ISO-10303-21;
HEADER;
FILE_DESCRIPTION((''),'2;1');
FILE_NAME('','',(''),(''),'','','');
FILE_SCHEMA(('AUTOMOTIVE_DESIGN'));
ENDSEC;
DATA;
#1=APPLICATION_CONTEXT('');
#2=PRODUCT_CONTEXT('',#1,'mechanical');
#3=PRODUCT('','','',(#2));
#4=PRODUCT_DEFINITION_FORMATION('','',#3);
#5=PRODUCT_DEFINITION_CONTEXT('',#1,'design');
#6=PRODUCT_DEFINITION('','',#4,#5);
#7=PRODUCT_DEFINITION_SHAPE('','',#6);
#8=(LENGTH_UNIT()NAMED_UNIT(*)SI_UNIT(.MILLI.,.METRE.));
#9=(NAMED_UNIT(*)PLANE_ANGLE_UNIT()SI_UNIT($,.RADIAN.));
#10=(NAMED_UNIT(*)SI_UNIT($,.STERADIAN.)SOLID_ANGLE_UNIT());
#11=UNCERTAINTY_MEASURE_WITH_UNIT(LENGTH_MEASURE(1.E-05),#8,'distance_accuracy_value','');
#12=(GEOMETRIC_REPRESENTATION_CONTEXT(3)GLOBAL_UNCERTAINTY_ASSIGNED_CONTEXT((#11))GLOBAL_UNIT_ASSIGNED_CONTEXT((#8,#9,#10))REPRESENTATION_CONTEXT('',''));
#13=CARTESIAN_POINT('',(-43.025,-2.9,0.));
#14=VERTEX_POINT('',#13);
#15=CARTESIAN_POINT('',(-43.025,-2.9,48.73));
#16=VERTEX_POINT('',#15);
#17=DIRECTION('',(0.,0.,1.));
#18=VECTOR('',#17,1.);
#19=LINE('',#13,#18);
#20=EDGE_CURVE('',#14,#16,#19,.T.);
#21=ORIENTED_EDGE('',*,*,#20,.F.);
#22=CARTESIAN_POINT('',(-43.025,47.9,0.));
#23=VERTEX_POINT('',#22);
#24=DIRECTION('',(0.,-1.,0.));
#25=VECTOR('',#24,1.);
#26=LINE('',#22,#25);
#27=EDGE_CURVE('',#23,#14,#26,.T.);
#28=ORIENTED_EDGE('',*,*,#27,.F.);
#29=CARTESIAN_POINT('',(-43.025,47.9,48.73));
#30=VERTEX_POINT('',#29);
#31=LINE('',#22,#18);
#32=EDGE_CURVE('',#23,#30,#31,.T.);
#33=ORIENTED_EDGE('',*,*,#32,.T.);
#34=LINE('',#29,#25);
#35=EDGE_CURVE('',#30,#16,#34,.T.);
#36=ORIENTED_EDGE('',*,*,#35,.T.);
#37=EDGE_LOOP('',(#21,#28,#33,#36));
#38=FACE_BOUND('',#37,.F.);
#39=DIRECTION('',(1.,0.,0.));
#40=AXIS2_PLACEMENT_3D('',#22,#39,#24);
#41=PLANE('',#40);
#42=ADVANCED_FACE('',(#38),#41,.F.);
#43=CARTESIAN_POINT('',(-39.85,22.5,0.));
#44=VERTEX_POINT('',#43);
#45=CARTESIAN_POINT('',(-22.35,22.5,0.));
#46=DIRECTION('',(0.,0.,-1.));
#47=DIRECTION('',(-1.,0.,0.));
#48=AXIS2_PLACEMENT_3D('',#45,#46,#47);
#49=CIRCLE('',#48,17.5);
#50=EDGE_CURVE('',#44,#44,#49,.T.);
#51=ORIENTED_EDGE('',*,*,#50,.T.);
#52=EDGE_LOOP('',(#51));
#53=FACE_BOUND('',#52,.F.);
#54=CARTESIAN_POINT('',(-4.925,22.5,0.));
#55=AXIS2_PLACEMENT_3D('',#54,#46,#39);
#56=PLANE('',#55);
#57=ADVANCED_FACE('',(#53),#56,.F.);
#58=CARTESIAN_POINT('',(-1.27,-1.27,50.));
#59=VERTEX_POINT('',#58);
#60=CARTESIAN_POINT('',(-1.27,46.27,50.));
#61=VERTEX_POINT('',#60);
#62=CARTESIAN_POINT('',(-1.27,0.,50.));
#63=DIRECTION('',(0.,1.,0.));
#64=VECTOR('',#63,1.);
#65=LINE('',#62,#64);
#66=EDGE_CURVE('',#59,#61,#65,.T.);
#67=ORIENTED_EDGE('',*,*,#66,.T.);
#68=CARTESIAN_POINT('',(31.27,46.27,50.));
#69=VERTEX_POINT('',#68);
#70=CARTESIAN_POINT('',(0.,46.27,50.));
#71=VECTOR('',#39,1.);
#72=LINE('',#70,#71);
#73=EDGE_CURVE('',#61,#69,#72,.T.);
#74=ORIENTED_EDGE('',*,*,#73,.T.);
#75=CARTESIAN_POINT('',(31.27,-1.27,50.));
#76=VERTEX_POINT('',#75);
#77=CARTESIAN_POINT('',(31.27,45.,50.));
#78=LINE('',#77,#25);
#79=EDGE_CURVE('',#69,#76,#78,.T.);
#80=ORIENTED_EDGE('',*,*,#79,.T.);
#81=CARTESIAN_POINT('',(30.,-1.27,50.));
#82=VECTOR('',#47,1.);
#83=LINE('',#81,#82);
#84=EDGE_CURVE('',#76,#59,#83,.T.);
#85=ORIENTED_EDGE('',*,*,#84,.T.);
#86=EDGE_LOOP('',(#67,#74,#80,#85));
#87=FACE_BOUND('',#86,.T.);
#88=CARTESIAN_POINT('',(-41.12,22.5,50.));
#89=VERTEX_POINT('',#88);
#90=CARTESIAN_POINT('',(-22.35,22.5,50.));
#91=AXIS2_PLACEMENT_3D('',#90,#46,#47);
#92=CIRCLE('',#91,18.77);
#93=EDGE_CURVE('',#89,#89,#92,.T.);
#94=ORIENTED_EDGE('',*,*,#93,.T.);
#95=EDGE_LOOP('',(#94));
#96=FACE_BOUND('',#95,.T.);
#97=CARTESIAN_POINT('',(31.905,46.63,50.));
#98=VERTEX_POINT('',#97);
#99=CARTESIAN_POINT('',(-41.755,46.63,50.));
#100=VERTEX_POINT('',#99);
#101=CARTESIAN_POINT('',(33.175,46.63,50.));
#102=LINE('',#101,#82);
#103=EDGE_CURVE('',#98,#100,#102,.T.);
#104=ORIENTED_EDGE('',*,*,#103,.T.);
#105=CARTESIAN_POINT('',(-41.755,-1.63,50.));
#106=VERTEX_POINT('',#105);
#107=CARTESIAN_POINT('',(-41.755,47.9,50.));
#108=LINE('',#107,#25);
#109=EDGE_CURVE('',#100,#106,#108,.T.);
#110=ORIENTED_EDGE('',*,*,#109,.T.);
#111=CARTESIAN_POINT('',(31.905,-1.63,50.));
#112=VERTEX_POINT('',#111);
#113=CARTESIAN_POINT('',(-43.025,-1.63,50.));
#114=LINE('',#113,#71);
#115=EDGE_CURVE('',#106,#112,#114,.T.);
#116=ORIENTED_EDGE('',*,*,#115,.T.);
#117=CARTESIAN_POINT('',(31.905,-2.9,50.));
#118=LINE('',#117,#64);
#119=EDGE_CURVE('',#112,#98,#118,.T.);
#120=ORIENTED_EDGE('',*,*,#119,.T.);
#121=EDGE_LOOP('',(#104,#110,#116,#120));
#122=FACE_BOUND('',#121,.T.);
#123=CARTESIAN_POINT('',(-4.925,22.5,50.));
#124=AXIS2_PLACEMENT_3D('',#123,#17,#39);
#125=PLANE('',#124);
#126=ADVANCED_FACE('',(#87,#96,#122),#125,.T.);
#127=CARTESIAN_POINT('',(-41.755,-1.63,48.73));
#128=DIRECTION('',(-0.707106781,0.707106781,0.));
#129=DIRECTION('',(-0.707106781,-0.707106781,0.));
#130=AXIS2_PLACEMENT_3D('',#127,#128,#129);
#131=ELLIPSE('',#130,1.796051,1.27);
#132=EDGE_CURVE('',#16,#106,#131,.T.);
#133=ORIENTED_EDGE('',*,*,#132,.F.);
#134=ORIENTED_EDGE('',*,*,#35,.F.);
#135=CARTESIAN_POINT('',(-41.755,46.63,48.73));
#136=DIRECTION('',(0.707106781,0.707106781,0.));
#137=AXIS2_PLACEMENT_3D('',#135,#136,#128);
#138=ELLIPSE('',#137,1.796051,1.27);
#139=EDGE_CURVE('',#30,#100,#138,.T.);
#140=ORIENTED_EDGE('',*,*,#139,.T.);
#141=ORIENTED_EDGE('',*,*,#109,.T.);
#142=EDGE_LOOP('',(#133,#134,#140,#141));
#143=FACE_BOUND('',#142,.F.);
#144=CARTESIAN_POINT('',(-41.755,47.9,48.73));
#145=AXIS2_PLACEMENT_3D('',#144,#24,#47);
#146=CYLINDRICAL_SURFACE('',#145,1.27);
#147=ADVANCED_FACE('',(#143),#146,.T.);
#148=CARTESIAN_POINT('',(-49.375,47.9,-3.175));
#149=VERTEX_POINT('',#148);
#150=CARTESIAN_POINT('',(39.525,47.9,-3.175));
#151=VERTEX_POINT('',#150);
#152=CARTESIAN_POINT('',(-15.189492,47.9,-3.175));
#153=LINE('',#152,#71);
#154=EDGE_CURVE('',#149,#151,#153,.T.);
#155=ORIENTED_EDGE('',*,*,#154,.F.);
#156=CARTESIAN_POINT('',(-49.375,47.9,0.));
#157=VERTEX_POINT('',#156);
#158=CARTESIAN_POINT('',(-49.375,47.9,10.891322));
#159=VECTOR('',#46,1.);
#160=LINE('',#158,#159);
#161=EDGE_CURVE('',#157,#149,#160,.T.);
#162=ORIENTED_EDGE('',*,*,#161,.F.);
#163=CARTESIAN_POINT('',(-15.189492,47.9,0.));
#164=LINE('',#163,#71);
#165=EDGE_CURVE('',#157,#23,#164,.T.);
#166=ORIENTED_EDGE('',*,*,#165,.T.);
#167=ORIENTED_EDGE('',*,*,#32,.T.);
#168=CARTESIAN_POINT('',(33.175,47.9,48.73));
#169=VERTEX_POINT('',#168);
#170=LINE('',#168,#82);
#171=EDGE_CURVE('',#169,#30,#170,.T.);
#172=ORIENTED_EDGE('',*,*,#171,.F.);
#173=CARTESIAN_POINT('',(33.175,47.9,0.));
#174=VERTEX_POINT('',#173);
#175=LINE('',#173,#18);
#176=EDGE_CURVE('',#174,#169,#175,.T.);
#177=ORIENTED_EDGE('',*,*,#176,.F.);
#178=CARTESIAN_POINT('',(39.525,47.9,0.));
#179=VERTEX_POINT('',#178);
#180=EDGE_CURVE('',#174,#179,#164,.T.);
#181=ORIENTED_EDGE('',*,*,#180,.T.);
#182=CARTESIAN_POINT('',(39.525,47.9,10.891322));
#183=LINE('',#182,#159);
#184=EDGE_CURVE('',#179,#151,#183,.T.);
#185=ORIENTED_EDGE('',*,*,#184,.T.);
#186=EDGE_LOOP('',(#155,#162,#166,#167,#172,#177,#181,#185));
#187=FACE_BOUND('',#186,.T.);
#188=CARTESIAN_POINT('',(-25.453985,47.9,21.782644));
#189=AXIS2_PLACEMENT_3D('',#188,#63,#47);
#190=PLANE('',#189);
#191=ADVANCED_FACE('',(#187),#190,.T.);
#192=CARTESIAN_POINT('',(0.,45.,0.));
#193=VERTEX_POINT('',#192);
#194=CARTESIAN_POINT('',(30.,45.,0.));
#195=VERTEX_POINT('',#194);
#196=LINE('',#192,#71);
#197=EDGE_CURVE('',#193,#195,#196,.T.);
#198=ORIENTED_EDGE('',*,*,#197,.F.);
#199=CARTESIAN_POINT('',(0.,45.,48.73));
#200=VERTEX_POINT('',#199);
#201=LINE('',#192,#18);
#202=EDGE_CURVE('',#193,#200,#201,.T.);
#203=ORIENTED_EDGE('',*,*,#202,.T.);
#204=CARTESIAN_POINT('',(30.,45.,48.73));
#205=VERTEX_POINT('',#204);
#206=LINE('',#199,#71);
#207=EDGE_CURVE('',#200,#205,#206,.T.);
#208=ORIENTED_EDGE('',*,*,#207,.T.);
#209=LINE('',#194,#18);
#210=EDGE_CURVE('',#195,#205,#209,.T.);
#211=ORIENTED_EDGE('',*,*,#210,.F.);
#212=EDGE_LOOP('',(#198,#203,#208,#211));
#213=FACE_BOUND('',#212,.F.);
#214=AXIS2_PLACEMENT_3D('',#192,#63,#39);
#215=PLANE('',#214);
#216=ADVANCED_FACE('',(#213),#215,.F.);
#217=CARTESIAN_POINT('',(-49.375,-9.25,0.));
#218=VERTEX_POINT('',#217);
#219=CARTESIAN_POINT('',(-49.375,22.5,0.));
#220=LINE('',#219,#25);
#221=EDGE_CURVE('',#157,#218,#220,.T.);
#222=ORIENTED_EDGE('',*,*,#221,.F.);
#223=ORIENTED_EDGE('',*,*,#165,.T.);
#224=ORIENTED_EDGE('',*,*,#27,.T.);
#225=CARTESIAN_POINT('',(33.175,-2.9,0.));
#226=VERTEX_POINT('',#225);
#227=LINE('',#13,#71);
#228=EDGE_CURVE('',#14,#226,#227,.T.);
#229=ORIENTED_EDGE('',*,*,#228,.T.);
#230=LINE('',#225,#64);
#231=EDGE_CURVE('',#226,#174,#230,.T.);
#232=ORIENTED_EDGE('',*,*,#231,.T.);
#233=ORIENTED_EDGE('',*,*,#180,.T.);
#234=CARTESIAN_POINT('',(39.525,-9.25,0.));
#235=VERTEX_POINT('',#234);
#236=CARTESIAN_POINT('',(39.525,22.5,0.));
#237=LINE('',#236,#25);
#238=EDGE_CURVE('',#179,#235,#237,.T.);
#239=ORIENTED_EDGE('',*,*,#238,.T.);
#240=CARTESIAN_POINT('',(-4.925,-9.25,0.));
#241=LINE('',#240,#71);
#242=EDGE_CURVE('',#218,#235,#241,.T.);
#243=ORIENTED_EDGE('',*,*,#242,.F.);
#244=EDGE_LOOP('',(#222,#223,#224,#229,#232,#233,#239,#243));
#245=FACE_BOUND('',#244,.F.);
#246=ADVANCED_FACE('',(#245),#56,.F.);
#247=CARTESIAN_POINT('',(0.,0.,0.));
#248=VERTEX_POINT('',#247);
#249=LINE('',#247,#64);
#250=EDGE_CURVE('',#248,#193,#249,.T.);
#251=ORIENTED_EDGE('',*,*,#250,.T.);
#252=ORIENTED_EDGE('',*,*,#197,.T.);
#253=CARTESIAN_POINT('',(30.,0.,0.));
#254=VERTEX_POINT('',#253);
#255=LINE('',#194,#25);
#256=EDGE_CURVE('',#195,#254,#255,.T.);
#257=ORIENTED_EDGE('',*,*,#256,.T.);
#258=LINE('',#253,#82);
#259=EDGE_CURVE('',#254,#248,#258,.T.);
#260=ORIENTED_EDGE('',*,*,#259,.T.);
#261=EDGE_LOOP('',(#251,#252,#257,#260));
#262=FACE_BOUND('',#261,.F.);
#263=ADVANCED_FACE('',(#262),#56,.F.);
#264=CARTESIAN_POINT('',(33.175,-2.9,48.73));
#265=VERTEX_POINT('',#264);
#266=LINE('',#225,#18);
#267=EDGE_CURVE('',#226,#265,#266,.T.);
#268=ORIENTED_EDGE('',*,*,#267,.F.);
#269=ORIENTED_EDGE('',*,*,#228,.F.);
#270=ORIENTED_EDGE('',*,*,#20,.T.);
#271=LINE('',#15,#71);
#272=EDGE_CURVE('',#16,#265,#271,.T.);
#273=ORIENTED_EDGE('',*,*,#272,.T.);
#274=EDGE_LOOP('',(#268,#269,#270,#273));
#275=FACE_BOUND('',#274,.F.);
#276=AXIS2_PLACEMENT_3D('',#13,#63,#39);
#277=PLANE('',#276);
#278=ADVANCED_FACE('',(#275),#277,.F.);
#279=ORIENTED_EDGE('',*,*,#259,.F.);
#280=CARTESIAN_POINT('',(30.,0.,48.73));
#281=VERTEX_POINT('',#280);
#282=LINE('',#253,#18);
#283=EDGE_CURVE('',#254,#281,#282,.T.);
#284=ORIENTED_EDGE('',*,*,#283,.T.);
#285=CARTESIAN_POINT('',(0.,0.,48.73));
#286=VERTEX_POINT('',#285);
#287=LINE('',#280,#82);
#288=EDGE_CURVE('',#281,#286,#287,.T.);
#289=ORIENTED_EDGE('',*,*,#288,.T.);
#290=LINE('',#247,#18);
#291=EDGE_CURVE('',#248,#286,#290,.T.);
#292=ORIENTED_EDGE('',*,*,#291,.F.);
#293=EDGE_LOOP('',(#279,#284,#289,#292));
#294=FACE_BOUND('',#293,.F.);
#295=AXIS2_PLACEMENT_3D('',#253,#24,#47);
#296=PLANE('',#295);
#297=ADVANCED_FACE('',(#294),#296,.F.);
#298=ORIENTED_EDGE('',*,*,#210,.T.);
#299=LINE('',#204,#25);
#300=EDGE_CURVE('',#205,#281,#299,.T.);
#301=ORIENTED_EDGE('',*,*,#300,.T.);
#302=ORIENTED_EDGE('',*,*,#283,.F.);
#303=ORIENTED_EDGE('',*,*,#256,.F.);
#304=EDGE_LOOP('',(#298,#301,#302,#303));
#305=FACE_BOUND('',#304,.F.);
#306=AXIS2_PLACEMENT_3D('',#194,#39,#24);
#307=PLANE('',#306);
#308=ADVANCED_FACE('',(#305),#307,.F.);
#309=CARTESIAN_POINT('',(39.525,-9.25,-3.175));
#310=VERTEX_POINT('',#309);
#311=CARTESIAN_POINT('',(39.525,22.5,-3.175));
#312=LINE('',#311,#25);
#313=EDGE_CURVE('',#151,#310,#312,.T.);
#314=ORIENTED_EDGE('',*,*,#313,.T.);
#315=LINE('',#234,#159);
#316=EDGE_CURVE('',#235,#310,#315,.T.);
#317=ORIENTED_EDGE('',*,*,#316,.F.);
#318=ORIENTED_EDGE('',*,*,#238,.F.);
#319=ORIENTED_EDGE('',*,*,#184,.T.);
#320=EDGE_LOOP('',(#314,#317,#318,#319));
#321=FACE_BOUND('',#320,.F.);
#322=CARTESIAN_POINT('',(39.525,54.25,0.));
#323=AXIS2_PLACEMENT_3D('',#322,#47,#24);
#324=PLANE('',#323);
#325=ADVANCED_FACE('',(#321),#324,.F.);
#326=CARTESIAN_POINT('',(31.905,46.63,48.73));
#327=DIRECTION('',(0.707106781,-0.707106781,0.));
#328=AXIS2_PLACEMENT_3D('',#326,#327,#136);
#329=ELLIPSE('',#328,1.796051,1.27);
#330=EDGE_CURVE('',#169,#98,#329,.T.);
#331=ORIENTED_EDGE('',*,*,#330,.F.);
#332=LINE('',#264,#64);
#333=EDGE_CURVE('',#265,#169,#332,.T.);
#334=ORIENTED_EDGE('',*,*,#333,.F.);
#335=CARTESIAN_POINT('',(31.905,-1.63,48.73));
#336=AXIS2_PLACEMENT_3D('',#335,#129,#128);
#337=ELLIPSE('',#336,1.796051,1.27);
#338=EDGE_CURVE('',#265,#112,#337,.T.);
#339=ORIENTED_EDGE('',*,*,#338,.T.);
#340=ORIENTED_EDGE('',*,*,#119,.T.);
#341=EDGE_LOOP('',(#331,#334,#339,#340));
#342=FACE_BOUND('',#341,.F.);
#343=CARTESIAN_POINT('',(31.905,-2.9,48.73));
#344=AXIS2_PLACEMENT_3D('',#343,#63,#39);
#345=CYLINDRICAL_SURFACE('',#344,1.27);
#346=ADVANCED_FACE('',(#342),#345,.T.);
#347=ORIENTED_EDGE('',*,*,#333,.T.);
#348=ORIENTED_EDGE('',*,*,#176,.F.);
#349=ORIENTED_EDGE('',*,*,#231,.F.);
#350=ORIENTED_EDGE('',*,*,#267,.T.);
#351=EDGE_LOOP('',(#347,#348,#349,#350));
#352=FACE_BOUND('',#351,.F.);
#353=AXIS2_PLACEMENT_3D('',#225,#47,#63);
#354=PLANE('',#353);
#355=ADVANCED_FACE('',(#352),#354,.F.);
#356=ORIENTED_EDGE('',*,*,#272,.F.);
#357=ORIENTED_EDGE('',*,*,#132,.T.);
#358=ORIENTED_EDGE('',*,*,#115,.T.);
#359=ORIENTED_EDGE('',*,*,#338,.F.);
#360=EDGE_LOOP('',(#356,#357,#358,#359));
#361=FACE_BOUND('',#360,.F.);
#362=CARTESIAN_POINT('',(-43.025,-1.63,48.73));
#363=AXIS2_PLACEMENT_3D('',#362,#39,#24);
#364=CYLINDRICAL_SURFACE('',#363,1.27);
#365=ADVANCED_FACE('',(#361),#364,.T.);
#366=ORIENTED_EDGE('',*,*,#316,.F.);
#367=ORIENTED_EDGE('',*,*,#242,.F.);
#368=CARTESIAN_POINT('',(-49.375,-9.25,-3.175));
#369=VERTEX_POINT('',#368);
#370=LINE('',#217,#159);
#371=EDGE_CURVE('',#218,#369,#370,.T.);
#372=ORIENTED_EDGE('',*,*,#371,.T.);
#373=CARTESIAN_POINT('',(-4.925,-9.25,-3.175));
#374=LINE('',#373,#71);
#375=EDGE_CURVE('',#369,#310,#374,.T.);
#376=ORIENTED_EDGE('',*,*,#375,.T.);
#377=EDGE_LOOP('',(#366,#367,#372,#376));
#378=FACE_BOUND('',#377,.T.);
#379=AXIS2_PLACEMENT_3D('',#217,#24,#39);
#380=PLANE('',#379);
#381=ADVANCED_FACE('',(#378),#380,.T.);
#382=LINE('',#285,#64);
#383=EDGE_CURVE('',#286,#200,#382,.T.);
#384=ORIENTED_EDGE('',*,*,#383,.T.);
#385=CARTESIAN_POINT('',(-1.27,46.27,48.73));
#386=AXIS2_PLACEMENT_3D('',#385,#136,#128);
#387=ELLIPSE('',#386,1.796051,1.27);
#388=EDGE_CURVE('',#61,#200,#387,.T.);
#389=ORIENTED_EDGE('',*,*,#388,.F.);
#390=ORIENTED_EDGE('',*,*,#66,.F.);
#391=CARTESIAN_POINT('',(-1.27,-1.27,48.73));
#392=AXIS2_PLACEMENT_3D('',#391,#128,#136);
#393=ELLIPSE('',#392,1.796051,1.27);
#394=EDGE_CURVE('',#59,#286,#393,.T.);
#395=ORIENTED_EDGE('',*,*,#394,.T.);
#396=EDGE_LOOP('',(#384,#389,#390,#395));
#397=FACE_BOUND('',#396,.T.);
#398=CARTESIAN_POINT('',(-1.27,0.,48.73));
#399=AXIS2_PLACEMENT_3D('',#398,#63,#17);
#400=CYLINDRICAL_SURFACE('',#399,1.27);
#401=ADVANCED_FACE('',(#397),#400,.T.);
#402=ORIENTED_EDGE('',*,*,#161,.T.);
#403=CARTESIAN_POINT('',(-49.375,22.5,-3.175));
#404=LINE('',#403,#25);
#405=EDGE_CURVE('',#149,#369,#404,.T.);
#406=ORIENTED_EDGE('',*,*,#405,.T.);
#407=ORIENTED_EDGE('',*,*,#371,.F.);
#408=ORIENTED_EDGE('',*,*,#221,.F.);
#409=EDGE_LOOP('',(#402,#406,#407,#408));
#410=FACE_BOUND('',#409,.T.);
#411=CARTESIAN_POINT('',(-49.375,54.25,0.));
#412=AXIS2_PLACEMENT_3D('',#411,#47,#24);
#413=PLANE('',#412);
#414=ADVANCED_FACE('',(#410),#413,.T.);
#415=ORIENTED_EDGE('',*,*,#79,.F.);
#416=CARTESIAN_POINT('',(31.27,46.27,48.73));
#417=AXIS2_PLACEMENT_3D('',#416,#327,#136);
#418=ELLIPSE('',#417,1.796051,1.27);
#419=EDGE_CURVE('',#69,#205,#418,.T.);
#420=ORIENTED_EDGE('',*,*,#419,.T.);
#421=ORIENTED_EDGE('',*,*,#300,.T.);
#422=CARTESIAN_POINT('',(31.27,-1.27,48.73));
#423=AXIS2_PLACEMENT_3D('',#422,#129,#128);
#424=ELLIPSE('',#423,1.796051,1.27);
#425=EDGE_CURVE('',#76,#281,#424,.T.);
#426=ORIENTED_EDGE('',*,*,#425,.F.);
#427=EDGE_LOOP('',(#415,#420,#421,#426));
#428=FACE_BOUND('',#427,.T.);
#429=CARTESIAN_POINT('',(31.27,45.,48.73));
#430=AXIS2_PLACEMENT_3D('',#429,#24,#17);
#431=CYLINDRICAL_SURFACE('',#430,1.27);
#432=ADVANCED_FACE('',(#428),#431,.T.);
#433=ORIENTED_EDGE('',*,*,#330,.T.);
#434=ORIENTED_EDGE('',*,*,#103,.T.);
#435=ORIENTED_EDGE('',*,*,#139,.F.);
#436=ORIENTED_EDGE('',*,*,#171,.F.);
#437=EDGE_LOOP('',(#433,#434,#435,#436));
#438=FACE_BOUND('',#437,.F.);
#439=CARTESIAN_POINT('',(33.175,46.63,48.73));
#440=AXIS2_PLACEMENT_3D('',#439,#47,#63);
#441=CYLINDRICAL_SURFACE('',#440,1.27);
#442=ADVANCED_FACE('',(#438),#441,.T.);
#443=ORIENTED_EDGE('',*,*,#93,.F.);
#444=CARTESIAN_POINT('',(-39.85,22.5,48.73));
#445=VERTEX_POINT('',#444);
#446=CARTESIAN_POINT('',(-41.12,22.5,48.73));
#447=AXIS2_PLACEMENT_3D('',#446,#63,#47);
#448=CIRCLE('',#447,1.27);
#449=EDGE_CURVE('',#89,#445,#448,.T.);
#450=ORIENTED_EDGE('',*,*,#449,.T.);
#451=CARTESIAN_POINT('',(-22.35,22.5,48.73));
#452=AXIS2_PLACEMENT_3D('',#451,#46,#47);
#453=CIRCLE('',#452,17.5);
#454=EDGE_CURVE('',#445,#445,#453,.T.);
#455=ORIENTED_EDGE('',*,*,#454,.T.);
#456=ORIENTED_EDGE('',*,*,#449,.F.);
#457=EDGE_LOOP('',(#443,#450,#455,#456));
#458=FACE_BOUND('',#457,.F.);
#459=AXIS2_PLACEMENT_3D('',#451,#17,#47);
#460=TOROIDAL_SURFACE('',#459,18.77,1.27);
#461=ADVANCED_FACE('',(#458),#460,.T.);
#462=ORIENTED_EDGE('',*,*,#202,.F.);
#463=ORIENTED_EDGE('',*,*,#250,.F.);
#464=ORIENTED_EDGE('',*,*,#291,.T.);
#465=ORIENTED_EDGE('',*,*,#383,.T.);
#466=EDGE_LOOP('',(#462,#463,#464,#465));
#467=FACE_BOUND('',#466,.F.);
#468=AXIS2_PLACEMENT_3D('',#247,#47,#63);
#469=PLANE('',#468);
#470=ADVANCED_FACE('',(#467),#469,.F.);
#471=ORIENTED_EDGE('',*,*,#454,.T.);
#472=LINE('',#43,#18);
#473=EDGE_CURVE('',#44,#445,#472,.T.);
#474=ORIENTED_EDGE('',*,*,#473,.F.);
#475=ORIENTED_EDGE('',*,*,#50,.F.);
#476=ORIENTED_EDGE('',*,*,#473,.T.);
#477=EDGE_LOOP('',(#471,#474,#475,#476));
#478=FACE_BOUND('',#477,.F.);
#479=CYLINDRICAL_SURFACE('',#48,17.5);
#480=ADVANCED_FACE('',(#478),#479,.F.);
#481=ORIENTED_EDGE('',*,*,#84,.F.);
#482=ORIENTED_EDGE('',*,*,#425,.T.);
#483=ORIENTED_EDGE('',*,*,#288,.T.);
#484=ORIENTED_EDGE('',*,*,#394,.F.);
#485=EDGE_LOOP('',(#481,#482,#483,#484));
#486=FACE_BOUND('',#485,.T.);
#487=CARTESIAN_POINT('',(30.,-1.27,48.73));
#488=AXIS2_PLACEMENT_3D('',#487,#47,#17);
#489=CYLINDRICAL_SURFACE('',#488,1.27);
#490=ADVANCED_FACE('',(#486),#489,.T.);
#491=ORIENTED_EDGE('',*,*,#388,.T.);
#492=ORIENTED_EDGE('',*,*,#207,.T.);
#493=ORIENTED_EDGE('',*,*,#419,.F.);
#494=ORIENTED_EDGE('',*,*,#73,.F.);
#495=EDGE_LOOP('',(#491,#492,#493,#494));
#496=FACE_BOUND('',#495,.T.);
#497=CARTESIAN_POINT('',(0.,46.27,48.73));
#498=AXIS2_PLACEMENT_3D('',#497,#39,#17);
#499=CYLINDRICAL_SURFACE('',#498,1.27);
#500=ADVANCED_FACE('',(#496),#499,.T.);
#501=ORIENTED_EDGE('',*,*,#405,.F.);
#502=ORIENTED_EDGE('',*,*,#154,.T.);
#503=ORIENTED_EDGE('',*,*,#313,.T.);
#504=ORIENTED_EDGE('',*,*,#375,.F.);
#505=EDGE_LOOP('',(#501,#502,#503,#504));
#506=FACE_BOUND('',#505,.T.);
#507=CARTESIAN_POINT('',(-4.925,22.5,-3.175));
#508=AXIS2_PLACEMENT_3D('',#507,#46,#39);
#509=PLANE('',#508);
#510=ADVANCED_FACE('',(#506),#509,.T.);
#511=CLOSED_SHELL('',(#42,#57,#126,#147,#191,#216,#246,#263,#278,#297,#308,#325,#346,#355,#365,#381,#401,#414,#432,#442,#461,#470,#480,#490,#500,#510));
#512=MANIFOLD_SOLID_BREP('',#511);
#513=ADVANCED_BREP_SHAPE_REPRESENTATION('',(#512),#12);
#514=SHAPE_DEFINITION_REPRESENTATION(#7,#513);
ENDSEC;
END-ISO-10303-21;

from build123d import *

# Parameters (mm, degrees)
F1_DEPTH = 50
F2_W     = 88.9
F2_H     = 63.5
F2_W_2   = 76.2
F2_H_2   = 50.8
F2_R     = 17.5
F2_W_3   = 30
F2_H_3   = 45
F3_DEPTH = 3.175
F4_W     = 442.8342580795
F4_H     = 256.8548172712
F5_DEPTH = 25.4
F6_R     = 1.27


with BuildPart() as f1:
    # F0 (on Top) → F1 (new body)
    with BuildSketch(Plane.XY):
        Polygon((33.175, -2.9), (33.175, 22.5), (33.175, 47.9), (-43.025, 47.9), (-43.025, 22.5), (-43.025, -2.9), align=None)
        with BuildLine():
            ThreePointArc((-4.85, 22.5), (-22.35, 5), (-39.85, 22.5))
            ThreePointArc((-39.85, 22.5), (-22.35, 40), (-4.85, 22.5))
        make_face(mode=Mode.SUBTRACT)
        Polygon((30, 0), (0, 0), (0, 45), (30, 45), (30, 22.5), align=None, mode=Mode.SUBTRACT)
    extrude(amount=F1_DEPTH)

    # F2 (on face) → F3 (join)
    with BuildSketch(Plane(origin=(0, 0, 0), x_dir=(1, 0, 0), z_dir=(0, 0, -1))):
        with Locations((-4.925, -22.5)):
            Rectangle(F2_W, F2_H)
        with Locations((-4.925, -22.5)):
            Rectangle(F2_W_2, F2_H_2, mode=Mode.SUBTRACT)
        with Locations((-4.925, -22.5)):
            Rectangle(F2_W_2, F2_H_2)
        with Locations((-22.35, -22.5)):
            Circle(F2_R, mode=Mode.SUBTRACT)
        with Locations((15, -22.5)):
            Rectangle(F2_W_3, F2_H_3, mode=Mode.SUBTRACT)
        with Locations((-22.35, -22.5)):
            Circle(F2_R)
        with Locations((15, -22.5)):
            Rectangle(F2_W_3, F2_H_3)
    extrude(amount=F3_DEPTH)

    # F4 (on face) → F5 (cut)
    with BuildSketch(Plane(origin=(0, 47.9, 0), x_dir=(-1, 0, 0), z_dir=(0, 1, 0))):
        with Locations((25.4539847374, 21.782644093)):
            Rectangle(F4_W, F4_H)
    extrude(amount=F5_DEPTH, mode=Mode.SUBTRACT)

    # F6
    f6_edges = [f1.edges().sort_by_distance(p)[0] for p in [
        (0, 22.5, 50),
        (33.175, 22.5, 50),
        (-4.925, 47.9, 50),
        (-43.025, 22.5, 50),
        (-4.925, -2.9, 50),
        (-39.85, 22.5, 50),
        (15, 0, 50),
        (15, 45, 50),
        (30, 22.5, 50),
    ]]
    fillet(f6_edges, radius=F6_R)


solid = f1.part
